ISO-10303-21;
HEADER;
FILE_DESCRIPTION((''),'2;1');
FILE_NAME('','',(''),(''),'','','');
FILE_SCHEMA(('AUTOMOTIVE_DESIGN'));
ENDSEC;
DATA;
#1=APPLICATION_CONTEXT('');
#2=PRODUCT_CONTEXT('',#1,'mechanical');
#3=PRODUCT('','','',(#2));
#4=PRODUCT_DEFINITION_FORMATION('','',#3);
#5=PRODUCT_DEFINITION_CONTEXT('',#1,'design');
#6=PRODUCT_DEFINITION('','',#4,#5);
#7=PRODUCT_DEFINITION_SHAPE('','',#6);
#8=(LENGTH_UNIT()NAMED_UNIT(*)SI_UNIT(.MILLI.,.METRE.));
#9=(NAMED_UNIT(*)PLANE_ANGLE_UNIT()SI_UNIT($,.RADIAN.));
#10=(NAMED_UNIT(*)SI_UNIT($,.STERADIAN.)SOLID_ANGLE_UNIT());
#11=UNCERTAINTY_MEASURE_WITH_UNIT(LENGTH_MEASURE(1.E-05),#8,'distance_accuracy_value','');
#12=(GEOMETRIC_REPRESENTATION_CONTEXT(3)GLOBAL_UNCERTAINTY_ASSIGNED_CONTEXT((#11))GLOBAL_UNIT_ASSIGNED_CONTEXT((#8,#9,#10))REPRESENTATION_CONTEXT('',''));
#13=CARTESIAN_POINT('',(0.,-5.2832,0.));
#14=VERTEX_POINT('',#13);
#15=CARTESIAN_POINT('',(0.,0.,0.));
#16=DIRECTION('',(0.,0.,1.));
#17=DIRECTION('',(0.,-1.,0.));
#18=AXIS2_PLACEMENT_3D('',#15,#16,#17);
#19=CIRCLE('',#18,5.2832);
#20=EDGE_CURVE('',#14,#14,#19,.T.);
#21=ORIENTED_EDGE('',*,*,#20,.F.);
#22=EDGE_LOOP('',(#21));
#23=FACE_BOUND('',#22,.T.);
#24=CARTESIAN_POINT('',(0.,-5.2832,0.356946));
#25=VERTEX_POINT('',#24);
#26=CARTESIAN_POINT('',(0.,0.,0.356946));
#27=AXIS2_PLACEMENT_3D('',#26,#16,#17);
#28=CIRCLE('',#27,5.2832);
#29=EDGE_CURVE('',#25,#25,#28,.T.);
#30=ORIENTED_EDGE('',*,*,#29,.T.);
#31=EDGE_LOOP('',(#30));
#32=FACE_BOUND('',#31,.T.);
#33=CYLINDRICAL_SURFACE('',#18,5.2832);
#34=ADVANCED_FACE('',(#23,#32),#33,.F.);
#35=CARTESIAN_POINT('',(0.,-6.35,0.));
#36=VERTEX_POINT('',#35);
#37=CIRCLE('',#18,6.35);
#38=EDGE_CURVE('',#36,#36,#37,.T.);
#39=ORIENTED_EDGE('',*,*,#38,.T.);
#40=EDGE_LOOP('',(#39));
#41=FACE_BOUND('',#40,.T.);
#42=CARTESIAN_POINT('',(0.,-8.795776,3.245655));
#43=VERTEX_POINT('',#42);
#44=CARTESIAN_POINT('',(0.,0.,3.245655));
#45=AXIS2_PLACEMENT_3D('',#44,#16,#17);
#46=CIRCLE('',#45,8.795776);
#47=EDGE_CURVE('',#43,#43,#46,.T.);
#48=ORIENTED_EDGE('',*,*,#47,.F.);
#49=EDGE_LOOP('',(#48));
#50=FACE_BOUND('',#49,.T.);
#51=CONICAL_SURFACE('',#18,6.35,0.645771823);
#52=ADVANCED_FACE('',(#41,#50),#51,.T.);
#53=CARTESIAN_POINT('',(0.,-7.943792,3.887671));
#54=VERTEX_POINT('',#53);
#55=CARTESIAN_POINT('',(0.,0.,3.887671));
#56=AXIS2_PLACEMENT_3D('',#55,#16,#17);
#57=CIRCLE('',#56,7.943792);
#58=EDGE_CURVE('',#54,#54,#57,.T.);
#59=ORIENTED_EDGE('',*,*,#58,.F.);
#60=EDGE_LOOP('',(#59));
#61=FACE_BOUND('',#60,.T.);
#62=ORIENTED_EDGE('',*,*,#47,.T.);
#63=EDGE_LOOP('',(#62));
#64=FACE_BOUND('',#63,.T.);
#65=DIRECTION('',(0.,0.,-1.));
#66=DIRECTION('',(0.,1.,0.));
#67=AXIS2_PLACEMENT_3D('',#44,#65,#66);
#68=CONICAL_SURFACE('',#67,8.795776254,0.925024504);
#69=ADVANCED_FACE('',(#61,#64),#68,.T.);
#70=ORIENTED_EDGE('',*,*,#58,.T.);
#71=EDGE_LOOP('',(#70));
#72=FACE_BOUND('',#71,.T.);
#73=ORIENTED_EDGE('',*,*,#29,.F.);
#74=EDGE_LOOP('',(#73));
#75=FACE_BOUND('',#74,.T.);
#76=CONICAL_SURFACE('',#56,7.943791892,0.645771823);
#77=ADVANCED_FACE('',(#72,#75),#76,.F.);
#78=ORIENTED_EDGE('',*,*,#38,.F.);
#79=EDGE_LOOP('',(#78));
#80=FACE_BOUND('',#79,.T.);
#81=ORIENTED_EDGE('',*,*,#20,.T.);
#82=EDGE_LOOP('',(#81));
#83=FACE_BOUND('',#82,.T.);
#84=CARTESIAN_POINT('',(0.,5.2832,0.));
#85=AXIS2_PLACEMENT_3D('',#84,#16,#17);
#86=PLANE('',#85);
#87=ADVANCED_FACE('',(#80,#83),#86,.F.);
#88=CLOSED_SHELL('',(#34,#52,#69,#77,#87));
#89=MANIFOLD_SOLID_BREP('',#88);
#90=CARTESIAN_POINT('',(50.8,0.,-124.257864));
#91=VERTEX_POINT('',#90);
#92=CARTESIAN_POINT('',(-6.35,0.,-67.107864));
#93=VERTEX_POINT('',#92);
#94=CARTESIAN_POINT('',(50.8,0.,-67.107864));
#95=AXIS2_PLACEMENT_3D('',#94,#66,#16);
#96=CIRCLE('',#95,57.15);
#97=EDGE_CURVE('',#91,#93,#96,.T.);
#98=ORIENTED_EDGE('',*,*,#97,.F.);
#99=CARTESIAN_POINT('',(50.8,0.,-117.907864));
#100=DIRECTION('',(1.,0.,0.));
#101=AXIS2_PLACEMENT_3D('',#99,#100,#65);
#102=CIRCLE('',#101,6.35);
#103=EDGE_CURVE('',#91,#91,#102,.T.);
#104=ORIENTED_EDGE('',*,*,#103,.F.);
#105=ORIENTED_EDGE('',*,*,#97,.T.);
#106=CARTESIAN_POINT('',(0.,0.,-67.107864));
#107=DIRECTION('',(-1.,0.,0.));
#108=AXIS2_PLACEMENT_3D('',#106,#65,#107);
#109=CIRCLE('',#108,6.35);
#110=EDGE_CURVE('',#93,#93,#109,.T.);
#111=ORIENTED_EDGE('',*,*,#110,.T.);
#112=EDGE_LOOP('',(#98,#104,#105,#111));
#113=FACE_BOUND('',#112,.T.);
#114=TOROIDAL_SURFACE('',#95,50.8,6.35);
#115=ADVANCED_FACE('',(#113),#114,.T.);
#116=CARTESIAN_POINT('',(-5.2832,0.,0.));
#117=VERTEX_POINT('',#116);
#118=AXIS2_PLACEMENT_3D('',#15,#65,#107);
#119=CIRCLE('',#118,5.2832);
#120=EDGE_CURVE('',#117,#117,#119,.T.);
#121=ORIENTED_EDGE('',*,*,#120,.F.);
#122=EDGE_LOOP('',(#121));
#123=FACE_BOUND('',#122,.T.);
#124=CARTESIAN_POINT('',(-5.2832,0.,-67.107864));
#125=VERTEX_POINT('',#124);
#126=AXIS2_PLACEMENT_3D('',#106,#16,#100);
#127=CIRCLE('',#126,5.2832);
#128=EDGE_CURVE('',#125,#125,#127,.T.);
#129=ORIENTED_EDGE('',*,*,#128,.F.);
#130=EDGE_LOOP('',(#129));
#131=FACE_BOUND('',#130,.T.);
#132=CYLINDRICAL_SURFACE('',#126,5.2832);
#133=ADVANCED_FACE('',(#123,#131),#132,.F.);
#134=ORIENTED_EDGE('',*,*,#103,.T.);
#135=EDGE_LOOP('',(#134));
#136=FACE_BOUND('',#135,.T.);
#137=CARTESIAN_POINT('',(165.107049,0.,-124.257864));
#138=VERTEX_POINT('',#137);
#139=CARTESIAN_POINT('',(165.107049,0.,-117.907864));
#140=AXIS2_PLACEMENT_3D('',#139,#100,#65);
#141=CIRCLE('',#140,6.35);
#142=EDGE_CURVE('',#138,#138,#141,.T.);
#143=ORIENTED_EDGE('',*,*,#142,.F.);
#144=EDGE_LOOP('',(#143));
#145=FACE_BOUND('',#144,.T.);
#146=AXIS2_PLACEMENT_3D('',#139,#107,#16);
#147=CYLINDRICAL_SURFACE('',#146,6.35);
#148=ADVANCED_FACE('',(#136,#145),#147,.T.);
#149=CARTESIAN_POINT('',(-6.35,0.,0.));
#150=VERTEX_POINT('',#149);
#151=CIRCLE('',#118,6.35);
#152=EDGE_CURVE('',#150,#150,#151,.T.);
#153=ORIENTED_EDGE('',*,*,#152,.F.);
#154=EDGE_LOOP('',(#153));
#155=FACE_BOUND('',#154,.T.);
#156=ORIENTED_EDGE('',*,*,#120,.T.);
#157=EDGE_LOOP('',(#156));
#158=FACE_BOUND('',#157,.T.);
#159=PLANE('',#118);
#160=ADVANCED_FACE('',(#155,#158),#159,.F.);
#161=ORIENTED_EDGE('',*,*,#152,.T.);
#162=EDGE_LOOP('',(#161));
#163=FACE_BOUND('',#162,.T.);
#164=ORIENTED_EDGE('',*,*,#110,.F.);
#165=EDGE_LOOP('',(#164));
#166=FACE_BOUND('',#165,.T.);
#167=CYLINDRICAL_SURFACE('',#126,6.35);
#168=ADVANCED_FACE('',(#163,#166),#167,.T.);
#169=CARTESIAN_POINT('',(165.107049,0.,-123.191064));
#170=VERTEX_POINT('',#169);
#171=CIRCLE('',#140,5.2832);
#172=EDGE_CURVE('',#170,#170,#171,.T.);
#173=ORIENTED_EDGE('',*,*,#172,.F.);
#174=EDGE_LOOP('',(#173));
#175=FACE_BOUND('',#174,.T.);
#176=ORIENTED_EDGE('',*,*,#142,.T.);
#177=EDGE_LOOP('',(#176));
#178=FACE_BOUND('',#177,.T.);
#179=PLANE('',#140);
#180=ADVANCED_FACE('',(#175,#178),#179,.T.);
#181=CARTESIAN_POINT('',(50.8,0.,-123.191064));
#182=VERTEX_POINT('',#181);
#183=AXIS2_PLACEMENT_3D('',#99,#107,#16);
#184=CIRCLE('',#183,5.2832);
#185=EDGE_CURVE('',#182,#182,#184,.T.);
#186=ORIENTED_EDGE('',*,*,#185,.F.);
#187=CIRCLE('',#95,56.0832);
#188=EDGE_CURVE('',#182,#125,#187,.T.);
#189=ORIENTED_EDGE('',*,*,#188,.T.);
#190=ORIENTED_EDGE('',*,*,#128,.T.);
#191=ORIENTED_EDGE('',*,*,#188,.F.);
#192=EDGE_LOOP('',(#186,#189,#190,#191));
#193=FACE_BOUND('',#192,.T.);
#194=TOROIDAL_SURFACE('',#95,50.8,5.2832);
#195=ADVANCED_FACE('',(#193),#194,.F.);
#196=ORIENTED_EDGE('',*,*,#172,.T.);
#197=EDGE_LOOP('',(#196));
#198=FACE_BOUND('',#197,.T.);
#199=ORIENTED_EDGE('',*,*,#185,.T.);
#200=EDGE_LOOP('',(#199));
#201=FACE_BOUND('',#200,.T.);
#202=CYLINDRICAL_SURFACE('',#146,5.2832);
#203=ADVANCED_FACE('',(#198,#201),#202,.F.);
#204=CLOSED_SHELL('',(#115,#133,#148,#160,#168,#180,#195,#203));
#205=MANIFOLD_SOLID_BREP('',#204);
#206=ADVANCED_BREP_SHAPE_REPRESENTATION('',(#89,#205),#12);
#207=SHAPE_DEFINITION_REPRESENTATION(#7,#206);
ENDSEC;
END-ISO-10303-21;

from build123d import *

# Parameters (mm, degrees)
SKETCH1_R                 = 6.35
SKETCH1_R_2               = 5.2832
PIPE_0_5_SCH_40_1_DEPTH   = 67.107863905
SKETCH1_ON_SEGMENT_2_R    = 6.35
SKETCH1_ON_SEGMENT_2_R_2  = 5.2832
PIPE_0_5_SCH_40_1_2_ANGLE = 90
SKETCH1_ON_SEGMENT_3_R    = 6.35
SKETCH1_ON_SEGMENT_3_R_2  = 5.2832
PIPE_0_5_SCH_40_1_3_DEPTH = 114.307049194


# Read off the part's stored shape, not the designer's step: Revolve1
with BuildPart() as part:
    # Revolve1 outline → Revolve1 (revolve)
    with BuildSketch(Plane.XZ):
        Polygon((5.2832, 0.356946287), (5.2832, 0), (6.35, 0), (8.795776254, 3.245654713), (7.943791892, 3.88767098), align=None)
    revolve(axis=Axis((0, 0, 0), (0, 0, 1)))


with BuildPart() as body_2:
    # Sketch1 → Pipe 0.5 SCH 40(1) (new body)
    with BuildSketch(Plane(origin=(0, 0, 0), x_dir=(-1, 0, 0), z_dir=(0, 0, -1))):
        Circle(SKETCH1_R)
        Circle(SKETCH1_R_2, mode=Mode.SUBTRACT)
    extrude(amount=PIPE_0_5_SCH_40_1_DEPTH)


with BuildPart() as body_3:
    # Sketch1 on segment 2 (carried to the start of arc 2) → Pipe 0.5 SCH 40_1 2 (revolve)
    with BuildSketch(Plane(origin=(0, 0, -67.107863905), x_dir=(-1, 0, 0), z_dir=(0, 0, -1))):
        Circle(SKETCH1_ON_SEGMENT_2_R)
        Circle(SKETCH1_ON_SEGMENT_2_R_2, mode=Mode.SUBTRACT)
    revolve(axis=Axis((50.8, 0, -67.107863905), (0, -1, 0)), revolution_arc=PIPE_0_5_SCH_40_1_2_ANGLE)


with BuildPart() as body_4:
    # Sketch1 on segment 3 (carried to segment 3) → Pipe 0.5 SCH 40_1 3 (new body)
    with BuildSketch(Plane(origin=(50.8, 0, -117.907863905), x_dir=(0, 0, -1), z_dir=(1, 0, 0))):
        Circle(SKETCH1_ON_SEGMENT_3_R)
        Circle(SKETCH1_ON_SEGMENT_3_R_2, mode=Mode.SUBTRACT)
    extrude(amount=PIPE_0_5_SCH_40_1_3_DEPTH)


with BuildPart() as body_2_1:
    add(body_2.part)

    # Pipe 0.5 SCH 40(1) as one body: union body 3, body 4
    add(body_3.part)
    add(body_4.part)


solid = Compound([part.part, body_2_1.part])
